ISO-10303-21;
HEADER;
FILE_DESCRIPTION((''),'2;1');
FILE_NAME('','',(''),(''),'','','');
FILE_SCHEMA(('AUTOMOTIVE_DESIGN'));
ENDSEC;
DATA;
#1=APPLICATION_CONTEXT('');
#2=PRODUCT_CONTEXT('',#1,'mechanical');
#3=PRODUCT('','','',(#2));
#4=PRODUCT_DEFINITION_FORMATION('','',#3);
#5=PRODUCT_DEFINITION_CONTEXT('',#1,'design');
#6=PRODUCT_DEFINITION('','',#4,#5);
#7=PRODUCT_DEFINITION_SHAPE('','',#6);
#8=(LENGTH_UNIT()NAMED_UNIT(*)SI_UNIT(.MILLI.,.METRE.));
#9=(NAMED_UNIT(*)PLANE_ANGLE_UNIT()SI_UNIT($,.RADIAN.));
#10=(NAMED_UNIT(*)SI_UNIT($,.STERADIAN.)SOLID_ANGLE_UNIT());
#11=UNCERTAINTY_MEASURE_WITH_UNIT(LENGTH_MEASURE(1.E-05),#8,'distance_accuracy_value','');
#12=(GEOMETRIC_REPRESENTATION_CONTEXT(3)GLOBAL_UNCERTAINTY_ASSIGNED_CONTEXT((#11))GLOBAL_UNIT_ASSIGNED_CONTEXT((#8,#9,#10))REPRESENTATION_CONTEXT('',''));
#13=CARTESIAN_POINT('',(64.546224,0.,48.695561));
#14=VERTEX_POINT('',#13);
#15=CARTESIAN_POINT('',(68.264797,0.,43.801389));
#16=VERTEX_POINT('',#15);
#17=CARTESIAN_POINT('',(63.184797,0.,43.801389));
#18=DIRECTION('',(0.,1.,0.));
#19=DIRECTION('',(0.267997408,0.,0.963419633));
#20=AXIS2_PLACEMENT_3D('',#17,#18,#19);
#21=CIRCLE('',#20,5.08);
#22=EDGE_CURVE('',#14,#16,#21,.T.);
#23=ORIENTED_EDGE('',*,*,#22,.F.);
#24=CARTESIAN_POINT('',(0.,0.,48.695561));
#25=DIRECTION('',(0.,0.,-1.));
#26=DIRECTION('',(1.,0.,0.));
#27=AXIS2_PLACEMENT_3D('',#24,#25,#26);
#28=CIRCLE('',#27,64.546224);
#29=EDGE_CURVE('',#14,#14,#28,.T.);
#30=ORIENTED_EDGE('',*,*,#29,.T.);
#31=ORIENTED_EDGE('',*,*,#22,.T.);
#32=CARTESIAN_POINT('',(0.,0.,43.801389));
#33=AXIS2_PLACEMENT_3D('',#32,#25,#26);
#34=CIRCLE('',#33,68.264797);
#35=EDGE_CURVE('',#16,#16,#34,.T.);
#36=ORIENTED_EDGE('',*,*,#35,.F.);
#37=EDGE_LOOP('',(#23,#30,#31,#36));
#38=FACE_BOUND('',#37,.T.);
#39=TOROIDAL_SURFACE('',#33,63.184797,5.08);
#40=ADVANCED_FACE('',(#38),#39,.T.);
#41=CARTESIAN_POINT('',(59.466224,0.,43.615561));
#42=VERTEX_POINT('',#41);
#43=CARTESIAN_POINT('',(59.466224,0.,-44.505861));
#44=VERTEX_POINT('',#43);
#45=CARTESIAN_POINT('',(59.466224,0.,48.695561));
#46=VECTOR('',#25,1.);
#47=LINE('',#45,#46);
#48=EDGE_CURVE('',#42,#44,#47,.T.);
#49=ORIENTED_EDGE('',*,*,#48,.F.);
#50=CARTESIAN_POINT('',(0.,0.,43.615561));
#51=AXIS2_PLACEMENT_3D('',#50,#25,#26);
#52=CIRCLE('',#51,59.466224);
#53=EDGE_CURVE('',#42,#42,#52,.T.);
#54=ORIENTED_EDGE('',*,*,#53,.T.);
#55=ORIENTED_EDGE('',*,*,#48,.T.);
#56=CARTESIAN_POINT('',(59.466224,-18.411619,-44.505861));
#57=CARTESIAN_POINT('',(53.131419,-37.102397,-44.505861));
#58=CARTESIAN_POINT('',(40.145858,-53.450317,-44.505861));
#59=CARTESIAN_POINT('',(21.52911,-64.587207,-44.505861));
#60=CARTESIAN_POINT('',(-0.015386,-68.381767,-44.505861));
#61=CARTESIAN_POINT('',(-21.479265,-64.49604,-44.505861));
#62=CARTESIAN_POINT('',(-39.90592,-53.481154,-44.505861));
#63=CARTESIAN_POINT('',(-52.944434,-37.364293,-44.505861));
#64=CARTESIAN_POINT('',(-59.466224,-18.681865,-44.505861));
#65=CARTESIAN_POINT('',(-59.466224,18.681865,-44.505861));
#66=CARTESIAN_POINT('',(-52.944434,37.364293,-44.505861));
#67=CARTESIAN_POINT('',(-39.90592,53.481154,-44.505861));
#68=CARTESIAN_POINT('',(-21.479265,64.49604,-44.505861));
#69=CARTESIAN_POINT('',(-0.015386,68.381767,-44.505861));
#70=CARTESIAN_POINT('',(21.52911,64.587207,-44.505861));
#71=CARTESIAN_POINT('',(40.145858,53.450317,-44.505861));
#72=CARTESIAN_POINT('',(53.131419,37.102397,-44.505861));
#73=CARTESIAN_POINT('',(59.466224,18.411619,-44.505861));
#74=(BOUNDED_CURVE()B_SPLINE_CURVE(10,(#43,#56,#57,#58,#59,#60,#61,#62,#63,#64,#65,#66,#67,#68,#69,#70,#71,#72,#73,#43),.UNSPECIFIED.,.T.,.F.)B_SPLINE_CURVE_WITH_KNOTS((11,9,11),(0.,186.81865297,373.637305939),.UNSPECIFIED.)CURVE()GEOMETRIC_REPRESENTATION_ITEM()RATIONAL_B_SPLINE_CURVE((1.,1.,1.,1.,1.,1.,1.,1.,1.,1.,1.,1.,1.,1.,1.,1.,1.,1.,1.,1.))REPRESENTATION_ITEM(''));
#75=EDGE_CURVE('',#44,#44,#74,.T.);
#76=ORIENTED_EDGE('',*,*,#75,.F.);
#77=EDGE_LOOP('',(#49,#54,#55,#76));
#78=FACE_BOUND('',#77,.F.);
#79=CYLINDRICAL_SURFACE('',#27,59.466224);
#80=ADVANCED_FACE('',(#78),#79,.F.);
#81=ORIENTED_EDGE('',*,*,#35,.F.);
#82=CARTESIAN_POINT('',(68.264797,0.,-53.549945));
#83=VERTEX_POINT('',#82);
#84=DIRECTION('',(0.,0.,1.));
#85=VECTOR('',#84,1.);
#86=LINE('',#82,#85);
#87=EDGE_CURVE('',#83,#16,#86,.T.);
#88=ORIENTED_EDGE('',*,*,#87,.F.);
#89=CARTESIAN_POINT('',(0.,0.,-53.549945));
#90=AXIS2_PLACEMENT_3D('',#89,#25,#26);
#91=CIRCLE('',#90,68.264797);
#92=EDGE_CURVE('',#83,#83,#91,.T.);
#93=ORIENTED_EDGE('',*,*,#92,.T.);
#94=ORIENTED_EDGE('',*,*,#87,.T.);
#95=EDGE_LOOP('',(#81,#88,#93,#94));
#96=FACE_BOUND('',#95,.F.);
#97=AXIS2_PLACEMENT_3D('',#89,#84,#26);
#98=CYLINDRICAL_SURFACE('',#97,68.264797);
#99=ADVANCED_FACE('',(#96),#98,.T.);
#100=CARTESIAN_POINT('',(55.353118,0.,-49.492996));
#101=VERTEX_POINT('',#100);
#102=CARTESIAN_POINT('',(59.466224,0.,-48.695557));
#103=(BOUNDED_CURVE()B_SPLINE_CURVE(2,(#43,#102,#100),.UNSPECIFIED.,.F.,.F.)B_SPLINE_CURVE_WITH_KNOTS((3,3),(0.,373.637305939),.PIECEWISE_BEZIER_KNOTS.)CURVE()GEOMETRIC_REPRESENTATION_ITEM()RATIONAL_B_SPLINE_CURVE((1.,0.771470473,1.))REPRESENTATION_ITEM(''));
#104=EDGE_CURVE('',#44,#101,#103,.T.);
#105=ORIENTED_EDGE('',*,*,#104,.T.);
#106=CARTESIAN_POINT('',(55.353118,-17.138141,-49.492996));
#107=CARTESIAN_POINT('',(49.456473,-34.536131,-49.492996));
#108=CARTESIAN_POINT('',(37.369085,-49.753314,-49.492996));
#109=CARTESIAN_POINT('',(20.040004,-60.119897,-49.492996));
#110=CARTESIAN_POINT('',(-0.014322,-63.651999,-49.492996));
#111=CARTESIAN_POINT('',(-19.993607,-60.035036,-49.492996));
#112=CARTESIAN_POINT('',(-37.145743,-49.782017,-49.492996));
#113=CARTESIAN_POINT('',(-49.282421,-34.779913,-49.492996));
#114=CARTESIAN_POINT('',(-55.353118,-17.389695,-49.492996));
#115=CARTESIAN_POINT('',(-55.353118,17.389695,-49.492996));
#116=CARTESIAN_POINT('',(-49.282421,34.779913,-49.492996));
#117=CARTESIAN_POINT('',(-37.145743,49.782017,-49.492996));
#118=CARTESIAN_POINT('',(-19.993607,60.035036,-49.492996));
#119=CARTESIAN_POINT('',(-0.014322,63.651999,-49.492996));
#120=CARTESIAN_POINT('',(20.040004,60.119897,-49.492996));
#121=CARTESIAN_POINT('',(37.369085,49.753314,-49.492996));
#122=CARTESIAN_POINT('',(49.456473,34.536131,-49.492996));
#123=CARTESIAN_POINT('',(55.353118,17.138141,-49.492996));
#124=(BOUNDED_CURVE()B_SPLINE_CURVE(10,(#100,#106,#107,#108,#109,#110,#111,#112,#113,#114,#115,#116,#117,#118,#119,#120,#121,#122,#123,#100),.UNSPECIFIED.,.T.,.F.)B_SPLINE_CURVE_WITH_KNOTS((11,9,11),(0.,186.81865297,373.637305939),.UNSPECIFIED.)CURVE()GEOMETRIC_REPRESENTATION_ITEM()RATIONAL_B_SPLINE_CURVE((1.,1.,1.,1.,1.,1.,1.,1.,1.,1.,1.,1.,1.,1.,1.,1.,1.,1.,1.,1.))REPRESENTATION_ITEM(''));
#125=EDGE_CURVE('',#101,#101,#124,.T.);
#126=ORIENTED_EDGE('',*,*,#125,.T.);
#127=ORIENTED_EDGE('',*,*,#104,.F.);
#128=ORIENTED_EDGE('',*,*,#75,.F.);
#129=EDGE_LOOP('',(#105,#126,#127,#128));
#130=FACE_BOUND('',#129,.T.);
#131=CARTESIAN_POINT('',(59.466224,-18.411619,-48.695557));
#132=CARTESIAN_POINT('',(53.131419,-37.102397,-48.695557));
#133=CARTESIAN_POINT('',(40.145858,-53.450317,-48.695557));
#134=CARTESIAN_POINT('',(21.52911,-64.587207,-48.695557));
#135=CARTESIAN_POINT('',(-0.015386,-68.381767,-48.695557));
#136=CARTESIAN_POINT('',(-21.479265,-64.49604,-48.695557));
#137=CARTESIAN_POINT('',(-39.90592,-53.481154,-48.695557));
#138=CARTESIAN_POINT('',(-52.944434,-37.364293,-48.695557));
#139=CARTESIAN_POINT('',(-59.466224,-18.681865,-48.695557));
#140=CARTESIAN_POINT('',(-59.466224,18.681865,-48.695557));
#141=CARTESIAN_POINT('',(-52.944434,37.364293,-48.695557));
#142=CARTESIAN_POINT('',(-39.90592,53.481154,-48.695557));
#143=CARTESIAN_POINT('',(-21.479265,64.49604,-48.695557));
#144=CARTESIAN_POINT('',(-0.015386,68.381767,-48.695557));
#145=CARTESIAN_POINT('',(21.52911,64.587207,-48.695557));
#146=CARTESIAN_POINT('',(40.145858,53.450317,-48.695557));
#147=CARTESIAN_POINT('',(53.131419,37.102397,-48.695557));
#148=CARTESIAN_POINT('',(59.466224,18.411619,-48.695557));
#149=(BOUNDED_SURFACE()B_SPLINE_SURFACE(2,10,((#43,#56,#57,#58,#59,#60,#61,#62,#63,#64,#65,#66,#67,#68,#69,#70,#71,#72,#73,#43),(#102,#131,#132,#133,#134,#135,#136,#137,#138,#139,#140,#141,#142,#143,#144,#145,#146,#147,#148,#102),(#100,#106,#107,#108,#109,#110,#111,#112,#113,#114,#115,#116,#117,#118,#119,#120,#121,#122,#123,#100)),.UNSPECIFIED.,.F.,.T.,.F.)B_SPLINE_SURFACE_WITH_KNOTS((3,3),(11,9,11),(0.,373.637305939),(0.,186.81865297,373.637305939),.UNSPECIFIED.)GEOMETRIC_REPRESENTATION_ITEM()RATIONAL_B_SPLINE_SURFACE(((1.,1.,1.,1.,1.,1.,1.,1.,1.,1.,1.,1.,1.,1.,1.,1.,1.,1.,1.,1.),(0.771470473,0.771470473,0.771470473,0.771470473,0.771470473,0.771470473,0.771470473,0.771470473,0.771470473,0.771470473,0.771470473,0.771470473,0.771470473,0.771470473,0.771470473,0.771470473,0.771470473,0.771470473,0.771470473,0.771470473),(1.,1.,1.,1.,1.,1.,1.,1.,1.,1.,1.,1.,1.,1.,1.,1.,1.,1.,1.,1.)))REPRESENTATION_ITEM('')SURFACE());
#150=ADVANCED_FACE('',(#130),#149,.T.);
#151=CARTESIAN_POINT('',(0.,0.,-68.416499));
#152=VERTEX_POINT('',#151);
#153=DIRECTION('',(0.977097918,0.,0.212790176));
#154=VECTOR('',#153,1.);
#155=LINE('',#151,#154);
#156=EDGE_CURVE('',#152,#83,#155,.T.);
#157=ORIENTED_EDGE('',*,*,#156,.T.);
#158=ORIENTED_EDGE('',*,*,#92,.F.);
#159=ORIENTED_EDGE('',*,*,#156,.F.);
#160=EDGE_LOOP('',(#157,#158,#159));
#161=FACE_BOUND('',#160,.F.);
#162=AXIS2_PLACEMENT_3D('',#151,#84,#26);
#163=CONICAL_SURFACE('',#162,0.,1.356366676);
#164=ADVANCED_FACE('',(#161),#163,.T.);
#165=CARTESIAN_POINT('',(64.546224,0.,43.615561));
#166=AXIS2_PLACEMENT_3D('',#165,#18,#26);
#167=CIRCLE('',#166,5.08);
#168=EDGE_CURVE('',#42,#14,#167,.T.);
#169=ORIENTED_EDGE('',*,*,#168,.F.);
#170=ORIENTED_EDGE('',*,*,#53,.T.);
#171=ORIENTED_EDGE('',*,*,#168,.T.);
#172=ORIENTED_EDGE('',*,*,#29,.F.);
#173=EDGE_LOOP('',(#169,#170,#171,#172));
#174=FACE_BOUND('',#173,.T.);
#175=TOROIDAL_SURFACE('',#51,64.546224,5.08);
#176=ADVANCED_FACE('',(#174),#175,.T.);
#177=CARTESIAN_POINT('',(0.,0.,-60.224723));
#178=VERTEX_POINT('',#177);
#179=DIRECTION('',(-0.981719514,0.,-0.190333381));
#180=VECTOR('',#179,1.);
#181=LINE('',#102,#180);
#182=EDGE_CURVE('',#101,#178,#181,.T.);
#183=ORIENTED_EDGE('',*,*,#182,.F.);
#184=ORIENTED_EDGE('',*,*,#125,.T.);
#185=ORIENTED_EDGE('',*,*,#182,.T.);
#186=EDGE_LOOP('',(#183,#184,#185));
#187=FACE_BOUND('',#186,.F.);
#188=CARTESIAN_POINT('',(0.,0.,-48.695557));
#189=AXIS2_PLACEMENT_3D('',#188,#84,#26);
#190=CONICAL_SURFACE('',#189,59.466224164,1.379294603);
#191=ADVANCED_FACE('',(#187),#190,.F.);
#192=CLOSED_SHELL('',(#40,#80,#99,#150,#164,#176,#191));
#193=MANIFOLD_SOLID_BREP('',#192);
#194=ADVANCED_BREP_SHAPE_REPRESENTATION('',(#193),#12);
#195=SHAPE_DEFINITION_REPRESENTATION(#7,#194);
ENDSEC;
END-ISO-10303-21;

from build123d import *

# Parameters (mm, degrees)
F2_R = 5.08
F3_R = 5.08


# Not quite as in the source:
# - a fillet or chamfer that OpenCascade refuses, or shapes differently, is made with other operations: its cross-section is extruded or revolved along the edge and cut away or added


with BuildPart() as f1:
    # F0 (on Front) → F1 (revolve)
    with BuildSketch(Plane.XZ):
        Polygon((68.2647973299, 48.6955605447), (59.4662241638, 48.6955605447), (59.4662241638, -48.6955568194), (0, -60.2247230709), (0, -68.4164986014), (68.2647973299, -53.5499453545), align=None)
    revolve(axis=Axis((0, 0, 0.9102020413), (0, 0, -1)))

    # F2
    f2_edges = [f1.edges().sort_by_distance(p)[0] for p in [
        (-59.466224, 0, -48.695557),
        (29.733112, 0, -54.46014),
    ]]
    fillet(f2_edges, radius=F2_R)

    # F3
    f3_edges = [f1.edges().sort_by_distance(p)[0] for p in [
        (-59.466224, 0, 48.695561),
    ]]
    fillet(f3_edges, radius=F3_R)

    # F4: fillet of radius 5.08 on 1 edges, made by hand

    # F4_s1 → F4_t2 (revolve, cut)
    with BuildSketch(Plane.XZ):
        with BuildLine():
            ThreePointArc((64.5462241638, 48.6955605447), (67.2296983371, 46.8746892895), (68.2647973299, 43.8013888093))
            Line((68.2647973299, 43.8013888093), (68.2647973299, 48.6955605447))
            Line((68.2647973299, 48.6955605447), (64.5462241638, 48.6955605447))
        make_face()
    revolve(axis=Axis((0, 0, 48.6955605447), (0, 0, -1)), mode=Mode.SUBTRACT)


solid = f1.part
